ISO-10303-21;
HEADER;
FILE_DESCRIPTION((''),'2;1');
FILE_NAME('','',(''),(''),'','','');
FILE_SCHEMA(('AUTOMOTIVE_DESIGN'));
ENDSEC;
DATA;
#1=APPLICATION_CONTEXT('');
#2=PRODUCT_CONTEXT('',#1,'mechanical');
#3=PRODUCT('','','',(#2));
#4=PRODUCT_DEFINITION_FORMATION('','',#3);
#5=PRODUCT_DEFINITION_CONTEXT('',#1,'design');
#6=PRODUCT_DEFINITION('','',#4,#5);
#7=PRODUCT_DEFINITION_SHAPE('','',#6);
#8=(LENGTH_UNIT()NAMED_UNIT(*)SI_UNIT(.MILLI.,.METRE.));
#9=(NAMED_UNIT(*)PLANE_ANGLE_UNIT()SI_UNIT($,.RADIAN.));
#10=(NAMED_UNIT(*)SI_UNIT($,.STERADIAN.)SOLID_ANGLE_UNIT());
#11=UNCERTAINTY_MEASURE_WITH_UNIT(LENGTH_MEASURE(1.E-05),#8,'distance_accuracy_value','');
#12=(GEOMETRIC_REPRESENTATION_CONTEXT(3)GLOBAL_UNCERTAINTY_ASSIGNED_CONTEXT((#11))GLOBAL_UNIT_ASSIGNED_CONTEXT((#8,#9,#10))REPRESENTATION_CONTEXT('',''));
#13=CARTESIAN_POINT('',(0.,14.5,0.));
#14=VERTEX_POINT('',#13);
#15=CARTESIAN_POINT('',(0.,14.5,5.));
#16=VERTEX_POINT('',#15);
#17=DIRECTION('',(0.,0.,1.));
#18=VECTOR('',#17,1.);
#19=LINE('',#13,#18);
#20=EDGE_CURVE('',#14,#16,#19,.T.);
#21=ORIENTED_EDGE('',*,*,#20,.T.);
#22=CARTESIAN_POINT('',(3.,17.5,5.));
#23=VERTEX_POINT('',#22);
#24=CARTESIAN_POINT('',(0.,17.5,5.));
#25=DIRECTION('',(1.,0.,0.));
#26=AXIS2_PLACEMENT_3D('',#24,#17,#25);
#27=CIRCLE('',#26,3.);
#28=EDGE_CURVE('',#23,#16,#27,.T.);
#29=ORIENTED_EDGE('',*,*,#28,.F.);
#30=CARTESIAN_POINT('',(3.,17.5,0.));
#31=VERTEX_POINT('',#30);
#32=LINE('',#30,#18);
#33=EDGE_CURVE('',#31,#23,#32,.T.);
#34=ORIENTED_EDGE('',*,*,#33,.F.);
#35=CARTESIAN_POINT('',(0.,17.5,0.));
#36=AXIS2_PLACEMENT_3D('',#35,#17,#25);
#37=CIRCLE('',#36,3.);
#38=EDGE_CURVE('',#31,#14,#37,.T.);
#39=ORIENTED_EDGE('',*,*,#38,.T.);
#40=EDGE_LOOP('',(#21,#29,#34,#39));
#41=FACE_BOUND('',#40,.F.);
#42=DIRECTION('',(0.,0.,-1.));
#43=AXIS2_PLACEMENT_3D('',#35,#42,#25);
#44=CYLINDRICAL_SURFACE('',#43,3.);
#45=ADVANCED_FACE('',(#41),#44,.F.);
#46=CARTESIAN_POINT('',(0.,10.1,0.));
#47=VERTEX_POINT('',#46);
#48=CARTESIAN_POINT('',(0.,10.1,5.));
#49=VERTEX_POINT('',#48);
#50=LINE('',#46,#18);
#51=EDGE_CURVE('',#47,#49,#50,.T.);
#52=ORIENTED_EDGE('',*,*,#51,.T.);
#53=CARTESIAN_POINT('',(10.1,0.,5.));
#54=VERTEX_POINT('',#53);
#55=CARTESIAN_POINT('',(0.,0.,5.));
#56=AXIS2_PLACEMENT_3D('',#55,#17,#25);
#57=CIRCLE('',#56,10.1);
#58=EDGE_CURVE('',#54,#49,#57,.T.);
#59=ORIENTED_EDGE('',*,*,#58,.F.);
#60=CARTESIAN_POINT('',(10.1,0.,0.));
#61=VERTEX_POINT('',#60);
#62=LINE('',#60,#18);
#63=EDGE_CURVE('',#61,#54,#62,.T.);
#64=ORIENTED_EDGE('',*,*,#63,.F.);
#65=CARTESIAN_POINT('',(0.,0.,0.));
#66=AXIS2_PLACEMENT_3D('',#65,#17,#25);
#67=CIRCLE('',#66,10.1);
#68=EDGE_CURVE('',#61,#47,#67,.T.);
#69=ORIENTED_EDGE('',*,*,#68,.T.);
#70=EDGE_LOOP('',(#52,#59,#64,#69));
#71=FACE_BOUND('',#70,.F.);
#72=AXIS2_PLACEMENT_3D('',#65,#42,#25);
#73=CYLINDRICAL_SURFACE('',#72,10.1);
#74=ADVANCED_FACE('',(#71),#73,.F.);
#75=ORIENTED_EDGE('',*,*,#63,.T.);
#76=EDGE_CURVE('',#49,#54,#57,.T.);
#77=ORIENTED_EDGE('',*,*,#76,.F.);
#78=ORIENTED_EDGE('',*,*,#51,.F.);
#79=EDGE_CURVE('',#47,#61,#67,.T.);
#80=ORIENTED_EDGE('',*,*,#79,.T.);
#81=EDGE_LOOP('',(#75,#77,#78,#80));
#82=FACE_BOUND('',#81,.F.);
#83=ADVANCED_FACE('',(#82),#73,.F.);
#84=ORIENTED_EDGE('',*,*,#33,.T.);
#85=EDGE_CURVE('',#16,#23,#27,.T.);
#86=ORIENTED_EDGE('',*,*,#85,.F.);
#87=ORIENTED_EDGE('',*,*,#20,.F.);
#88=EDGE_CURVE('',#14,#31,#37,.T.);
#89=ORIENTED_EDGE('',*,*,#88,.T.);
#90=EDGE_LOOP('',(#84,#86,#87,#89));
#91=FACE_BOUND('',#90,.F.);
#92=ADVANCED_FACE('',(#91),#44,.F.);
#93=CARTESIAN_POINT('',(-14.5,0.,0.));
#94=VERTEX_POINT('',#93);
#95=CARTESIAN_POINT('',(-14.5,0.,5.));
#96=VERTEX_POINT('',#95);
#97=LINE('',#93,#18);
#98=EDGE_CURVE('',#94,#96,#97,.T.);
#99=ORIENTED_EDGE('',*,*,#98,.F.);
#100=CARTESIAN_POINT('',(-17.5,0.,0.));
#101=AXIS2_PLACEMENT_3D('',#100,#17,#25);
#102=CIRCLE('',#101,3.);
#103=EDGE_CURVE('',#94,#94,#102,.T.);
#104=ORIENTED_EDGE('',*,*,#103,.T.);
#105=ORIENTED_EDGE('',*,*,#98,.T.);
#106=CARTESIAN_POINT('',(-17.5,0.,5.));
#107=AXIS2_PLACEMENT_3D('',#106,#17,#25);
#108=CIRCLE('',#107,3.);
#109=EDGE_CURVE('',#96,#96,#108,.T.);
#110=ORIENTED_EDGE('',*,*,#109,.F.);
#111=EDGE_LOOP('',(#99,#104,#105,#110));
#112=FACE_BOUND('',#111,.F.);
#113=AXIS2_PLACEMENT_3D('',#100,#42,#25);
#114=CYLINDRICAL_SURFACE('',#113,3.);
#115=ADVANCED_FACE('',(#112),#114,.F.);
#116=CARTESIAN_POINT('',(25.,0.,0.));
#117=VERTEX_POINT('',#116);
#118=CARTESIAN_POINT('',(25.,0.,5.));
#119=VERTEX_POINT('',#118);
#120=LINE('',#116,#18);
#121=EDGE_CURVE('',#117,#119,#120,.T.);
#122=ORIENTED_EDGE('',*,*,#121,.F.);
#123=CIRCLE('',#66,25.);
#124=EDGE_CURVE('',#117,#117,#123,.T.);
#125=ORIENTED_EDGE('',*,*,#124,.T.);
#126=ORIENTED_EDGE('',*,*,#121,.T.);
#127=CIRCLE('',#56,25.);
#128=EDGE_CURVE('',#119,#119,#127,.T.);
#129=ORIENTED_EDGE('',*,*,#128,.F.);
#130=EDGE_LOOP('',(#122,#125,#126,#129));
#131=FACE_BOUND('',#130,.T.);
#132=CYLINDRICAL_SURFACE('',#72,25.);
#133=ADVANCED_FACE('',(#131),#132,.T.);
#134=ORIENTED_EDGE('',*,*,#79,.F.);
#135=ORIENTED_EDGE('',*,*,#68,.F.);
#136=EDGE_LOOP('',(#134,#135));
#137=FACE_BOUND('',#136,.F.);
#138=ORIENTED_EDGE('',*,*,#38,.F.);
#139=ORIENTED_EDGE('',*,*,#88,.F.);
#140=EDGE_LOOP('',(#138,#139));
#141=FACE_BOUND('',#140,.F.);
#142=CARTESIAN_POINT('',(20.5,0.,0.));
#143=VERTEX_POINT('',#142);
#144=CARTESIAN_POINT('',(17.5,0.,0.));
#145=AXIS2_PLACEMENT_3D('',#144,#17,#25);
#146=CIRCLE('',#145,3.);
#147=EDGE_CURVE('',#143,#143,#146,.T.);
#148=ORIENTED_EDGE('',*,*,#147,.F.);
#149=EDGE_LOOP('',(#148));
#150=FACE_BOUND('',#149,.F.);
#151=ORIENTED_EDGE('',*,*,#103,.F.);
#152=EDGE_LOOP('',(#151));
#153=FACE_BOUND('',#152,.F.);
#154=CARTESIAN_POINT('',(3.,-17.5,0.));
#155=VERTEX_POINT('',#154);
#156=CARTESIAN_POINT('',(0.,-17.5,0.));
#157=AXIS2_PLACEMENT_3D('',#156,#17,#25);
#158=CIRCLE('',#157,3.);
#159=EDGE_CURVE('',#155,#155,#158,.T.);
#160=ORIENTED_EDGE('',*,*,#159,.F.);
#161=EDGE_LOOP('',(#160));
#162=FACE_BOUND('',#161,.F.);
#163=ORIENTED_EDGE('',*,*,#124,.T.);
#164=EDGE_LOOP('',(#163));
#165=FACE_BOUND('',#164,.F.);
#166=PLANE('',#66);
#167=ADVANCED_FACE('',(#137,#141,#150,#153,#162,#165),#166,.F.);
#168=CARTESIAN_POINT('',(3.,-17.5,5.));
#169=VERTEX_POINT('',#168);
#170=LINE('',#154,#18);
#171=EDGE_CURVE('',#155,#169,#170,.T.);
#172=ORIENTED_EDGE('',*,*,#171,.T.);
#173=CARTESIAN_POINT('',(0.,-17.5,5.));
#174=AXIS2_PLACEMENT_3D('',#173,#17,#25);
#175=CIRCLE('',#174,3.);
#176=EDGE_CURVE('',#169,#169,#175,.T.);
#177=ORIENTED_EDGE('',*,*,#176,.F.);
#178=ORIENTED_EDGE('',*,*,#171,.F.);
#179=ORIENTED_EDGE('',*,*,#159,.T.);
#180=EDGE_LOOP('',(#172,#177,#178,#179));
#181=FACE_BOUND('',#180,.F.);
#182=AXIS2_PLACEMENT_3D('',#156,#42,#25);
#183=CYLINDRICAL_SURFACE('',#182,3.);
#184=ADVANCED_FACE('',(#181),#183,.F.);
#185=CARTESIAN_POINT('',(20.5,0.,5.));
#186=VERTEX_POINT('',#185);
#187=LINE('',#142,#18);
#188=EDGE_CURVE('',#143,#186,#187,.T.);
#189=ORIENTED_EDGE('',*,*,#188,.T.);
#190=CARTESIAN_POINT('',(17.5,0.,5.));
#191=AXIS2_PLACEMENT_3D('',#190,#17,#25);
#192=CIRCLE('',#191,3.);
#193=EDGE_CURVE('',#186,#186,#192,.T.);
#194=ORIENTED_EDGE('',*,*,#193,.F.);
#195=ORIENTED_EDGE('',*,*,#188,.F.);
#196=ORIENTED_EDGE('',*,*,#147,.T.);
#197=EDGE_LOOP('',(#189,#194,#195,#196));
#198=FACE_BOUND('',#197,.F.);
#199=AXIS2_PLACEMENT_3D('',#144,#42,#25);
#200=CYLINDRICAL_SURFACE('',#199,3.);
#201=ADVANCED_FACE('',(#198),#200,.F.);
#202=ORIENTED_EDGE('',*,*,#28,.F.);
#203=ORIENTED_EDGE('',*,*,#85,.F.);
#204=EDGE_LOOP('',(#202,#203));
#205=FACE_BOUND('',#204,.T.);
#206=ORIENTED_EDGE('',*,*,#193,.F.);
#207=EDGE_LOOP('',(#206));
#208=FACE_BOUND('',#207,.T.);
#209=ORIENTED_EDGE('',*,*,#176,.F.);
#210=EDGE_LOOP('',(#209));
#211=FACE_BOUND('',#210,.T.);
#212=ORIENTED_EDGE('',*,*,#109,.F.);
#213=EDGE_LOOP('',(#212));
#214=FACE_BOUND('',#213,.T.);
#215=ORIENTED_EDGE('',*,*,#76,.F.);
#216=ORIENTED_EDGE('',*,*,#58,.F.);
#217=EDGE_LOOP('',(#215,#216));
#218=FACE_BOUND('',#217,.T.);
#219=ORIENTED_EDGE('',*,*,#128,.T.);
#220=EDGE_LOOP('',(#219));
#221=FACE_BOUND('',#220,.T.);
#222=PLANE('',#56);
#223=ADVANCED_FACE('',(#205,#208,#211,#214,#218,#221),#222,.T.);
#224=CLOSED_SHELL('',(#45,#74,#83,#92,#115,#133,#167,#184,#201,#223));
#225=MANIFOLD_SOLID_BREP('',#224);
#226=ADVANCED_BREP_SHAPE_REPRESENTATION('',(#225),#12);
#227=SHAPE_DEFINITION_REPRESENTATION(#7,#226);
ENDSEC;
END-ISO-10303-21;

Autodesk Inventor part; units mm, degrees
ref_plane "YZ Plane" through (0, 0, 0) normal (1, 0, 0) x (0, 1, 0)
ref_plane "XZ Plane" through (0, 0, 0) normal (0, 1, 0) x (-1, 0, 0)
ref_plane "XY Plane" through (0, 0, 0) normal (0, 0, 1) x (1, 0, 0)
sketch "Sketch1" plane through (0, 0, 0) normal (0, 0, 1) x (1, 0, 0)
  circle A0 centre (0, 0) radius 10.1
  circle A1 centre (0, 0) radius 25
  circle A2 centre (0, 0) radius 17.5 construction
  circle A3 centre (0, 17.5) radius 3
  circle A4 centre (-17.5, 0) radius 3
  circle A5 centre (0, -17.5) radius 3
  circle A6 centre (17.5, 0) radius 3
  line L0 (0, 0) -> (0, 17.5)
  line L1 (0, 0) -> (17.5, 0) construction
  dimension "d0" = 20.2
  dimension "d1" = 50
  dimension "d2" = 35
  dimension "d3" = 6
  dimension "d6" = 360
  dimension "d8" = 90
extrude "Extrusion1" add sketch "Sketch1" along normal blind 5
properties part number "JTW20" material "Brass, Soft Yellow"
